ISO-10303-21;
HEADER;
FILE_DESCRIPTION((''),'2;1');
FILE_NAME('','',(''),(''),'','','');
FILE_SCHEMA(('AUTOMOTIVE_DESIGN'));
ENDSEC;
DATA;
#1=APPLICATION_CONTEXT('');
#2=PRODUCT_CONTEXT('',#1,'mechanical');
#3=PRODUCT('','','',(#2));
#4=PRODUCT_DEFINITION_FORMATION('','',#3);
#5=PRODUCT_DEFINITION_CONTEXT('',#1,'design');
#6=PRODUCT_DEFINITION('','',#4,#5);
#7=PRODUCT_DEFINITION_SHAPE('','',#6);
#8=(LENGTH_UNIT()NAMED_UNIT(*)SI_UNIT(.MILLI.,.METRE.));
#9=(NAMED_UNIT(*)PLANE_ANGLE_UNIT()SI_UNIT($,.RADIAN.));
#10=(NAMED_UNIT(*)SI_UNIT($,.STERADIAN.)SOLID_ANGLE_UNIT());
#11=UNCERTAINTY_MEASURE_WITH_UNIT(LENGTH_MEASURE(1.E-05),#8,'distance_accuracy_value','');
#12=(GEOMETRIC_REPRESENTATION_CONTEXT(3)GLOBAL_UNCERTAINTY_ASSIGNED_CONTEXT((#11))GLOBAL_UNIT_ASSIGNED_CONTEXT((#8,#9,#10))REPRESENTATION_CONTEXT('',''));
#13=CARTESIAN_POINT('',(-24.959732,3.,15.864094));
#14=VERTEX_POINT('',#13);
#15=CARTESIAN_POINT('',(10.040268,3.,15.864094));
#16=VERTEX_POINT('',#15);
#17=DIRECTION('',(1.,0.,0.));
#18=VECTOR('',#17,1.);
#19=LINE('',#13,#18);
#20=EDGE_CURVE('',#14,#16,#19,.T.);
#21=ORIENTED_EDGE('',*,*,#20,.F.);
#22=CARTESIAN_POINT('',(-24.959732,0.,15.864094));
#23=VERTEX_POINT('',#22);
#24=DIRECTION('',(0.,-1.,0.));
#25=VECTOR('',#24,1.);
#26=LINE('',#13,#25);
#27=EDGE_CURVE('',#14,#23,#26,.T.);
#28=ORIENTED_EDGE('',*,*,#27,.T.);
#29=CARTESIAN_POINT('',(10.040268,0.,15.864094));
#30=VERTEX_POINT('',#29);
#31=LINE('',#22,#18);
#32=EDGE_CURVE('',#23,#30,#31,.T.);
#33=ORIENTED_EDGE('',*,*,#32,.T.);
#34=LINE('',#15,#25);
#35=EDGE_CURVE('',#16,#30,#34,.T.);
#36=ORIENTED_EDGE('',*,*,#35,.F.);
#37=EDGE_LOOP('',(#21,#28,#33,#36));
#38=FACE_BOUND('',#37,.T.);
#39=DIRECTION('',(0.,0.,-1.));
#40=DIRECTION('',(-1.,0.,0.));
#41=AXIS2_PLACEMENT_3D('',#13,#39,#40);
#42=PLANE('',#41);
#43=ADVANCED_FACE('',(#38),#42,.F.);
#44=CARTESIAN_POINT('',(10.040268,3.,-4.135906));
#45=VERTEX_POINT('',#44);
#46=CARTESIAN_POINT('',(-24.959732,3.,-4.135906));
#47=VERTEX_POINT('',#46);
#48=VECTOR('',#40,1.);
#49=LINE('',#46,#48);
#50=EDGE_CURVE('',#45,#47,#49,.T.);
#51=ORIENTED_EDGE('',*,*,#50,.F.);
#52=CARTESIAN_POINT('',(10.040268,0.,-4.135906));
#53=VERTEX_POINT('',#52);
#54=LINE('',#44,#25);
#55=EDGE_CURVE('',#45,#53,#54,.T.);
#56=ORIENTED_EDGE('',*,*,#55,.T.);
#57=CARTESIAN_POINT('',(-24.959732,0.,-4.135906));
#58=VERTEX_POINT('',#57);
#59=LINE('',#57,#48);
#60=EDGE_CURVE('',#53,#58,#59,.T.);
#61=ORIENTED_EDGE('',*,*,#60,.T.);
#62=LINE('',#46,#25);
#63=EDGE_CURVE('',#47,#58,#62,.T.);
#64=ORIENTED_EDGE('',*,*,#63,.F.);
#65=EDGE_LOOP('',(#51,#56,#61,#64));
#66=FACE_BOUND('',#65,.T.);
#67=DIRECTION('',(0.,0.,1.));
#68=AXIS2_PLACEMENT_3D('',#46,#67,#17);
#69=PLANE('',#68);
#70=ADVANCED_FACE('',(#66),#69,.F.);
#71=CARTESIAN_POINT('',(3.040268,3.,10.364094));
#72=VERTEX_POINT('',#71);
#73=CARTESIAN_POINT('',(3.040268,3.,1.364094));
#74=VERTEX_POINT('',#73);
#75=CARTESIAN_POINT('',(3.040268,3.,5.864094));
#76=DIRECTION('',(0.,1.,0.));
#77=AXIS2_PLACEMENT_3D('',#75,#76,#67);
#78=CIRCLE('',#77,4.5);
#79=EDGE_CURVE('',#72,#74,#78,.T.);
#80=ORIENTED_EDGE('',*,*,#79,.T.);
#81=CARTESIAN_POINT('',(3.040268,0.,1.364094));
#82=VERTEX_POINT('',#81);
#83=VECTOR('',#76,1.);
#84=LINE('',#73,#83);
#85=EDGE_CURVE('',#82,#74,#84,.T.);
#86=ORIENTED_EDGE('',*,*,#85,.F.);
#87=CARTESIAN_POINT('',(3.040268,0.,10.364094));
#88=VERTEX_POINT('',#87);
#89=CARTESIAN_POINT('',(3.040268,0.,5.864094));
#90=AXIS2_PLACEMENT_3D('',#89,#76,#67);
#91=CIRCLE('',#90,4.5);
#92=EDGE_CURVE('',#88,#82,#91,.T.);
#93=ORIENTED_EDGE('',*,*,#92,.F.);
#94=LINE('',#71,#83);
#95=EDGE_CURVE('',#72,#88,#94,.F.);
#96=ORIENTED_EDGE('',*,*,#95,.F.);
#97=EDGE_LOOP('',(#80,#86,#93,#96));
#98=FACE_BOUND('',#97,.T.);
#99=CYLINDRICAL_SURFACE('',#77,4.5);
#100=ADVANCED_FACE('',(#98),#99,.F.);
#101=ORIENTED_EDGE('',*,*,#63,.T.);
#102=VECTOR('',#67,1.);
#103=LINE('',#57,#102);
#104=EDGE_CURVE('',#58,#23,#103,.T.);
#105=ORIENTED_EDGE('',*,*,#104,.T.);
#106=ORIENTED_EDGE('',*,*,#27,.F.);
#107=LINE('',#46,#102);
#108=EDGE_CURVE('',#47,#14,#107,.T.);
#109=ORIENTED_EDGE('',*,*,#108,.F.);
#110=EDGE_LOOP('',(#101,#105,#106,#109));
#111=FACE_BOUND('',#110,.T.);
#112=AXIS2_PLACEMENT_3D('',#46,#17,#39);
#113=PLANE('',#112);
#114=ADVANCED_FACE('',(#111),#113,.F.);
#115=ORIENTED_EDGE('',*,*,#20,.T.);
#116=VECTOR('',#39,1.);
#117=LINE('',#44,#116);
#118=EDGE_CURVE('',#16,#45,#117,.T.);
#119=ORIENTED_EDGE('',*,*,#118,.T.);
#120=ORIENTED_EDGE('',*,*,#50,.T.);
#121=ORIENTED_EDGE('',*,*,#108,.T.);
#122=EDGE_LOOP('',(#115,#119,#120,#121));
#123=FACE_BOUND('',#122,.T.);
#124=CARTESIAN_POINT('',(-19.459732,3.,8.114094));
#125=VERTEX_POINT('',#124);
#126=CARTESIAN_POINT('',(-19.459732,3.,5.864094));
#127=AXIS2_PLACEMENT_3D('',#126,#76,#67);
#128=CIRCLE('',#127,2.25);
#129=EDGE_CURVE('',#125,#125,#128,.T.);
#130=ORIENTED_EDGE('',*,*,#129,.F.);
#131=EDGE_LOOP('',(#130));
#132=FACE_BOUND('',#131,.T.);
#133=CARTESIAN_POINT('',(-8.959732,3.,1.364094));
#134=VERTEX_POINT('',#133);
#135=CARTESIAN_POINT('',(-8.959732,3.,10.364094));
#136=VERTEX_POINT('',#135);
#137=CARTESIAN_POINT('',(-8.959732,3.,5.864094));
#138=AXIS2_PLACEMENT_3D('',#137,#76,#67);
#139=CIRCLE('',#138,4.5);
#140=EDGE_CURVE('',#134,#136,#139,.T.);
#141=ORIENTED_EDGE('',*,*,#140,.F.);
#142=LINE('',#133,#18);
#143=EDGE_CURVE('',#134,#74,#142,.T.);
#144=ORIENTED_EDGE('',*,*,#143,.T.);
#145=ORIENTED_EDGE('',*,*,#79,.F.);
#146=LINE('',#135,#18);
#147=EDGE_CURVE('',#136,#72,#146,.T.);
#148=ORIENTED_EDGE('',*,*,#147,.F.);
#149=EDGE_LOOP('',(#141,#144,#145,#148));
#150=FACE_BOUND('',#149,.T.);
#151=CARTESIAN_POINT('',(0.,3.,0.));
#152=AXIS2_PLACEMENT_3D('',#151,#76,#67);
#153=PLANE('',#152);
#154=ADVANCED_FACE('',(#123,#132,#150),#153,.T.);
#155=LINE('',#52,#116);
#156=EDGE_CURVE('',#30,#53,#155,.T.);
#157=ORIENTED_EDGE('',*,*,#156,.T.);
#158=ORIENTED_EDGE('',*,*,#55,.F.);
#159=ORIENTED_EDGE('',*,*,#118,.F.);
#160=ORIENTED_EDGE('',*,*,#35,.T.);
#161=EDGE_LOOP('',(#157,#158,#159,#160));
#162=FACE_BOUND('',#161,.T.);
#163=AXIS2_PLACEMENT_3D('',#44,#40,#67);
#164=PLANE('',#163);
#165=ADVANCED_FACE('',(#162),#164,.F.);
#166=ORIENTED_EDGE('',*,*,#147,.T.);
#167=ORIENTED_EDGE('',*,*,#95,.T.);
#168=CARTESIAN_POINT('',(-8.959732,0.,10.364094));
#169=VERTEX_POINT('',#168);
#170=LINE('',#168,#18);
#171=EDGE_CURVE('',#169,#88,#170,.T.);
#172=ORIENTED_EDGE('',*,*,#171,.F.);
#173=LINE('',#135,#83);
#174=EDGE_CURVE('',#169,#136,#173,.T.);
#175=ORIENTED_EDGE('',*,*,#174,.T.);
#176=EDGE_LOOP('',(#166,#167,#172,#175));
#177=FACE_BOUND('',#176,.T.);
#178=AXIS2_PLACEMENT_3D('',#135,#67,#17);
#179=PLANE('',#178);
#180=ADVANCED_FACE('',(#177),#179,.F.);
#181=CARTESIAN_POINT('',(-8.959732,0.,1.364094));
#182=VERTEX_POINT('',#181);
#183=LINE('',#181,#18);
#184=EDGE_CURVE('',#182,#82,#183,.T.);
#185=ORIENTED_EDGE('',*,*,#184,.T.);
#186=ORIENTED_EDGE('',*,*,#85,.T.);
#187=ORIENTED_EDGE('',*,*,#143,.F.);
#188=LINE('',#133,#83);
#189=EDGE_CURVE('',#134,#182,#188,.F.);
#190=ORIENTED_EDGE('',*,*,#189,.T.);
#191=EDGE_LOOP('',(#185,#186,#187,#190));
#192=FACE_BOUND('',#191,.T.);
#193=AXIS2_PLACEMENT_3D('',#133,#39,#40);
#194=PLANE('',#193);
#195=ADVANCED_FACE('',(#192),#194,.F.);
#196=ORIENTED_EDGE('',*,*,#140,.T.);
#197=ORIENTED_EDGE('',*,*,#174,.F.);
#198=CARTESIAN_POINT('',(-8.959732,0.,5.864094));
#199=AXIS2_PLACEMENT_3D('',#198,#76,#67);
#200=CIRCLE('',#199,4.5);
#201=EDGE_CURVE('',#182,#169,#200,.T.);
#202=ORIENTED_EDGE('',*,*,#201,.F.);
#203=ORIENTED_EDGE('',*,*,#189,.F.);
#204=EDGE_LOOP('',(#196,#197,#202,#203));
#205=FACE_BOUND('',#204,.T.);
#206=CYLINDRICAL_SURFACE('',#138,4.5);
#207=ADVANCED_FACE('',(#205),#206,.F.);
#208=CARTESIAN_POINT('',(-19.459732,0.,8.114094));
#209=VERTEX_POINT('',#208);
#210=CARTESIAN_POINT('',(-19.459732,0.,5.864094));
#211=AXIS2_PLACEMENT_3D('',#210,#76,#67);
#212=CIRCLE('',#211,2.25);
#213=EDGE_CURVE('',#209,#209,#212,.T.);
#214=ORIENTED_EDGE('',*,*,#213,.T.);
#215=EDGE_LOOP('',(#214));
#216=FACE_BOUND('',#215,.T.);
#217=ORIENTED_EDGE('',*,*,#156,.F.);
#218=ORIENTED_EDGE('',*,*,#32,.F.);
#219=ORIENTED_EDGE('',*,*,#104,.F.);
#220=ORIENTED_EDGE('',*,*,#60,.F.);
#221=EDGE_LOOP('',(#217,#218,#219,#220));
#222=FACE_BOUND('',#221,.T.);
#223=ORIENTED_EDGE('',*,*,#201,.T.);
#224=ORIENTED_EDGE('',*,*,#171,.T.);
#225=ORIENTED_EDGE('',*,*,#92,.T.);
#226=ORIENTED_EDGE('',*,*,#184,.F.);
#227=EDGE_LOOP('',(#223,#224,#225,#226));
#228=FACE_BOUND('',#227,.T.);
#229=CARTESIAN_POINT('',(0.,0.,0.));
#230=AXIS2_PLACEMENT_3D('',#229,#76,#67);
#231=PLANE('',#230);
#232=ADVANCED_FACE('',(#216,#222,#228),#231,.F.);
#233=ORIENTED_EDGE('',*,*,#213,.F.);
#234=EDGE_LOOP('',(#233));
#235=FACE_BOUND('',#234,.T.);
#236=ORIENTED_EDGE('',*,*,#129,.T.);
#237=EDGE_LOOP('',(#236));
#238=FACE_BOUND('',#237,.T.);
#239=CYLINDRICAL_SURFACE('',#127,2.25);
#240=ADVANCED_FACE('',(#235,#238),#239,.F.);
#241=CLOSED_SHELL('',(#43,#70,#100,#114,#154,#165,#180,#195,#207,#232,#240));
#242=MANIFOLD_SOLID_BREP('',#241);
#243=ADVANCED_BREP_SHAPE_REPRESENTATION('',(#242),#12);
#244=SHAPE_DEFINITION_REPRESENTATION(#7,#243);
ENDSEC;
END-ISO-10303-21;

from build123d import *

# Parameters (mm, degrees)
SKETCH1_W                = 35
SKETCH1_H                = 20
BOSS_EXTRUDE1_DEPTH      = 3
M8_CLEARANCE_SLOT1_DEPTH = 3
M4_CLEARANCE_SLOT1_D     = 4.5


# Read off the part's stored shape, not the designer's step: M8 Clearance Slot1
with BuildPart() as part:
    # Sketch1 → Boss-Extrude1 (new body)
    with BuildSketch(Plane(origin=(0, 0, 0), x_dir=(1, 0, 0), z_dir=(0, 1, 0))):
        with Locations((-7.459731544, -5.86409396)):
            Rectangle(SKETCH1_W, SKETCH1_H)
    extrude(amount=BOSS_EXTRUDE1_DEPTH)

    # M8 Clearance Slot1 outline → M8 Clearance Slot1 (cut)
    with BuildSketch(Plane(origin=(0, 0, 0), x_dir=(1, 0, 0), z_dir=(0, 1, 0))):
        with BuildLine():
            Line((-8.959731544, -10.36409396), (3.040268456, -10.36409396))
            ThreePointArc((3.040268456, -10.36409396), (7.540268456, -5.86409396), (3.040268456, -1.36409396))
            Line((3.040268456, -1.36409396), (-8.959731544, -1.36409396))
            ThreePointArc((-8.959731544, -1.36409396), (-13.459731544, -5.86409396), (-8.959731544, -10.36409396))
        make_face()
    extrude(amount=M8_CLEARANCE_SLOT1_DEPTH, mode=Mode.SUBTRACT)

    # M4 Clearance Slot1 (through all)
    with Locations(Plane(origin=(0, 3, 0), x_dir=(1, 0, 0), z_dir=(0, 1, 0))):
        with Locations((-19.459731544, -5.86409396)):
            Hole(M4_CLEARANCE_SLOT1_D / 2)


solid = part.part
